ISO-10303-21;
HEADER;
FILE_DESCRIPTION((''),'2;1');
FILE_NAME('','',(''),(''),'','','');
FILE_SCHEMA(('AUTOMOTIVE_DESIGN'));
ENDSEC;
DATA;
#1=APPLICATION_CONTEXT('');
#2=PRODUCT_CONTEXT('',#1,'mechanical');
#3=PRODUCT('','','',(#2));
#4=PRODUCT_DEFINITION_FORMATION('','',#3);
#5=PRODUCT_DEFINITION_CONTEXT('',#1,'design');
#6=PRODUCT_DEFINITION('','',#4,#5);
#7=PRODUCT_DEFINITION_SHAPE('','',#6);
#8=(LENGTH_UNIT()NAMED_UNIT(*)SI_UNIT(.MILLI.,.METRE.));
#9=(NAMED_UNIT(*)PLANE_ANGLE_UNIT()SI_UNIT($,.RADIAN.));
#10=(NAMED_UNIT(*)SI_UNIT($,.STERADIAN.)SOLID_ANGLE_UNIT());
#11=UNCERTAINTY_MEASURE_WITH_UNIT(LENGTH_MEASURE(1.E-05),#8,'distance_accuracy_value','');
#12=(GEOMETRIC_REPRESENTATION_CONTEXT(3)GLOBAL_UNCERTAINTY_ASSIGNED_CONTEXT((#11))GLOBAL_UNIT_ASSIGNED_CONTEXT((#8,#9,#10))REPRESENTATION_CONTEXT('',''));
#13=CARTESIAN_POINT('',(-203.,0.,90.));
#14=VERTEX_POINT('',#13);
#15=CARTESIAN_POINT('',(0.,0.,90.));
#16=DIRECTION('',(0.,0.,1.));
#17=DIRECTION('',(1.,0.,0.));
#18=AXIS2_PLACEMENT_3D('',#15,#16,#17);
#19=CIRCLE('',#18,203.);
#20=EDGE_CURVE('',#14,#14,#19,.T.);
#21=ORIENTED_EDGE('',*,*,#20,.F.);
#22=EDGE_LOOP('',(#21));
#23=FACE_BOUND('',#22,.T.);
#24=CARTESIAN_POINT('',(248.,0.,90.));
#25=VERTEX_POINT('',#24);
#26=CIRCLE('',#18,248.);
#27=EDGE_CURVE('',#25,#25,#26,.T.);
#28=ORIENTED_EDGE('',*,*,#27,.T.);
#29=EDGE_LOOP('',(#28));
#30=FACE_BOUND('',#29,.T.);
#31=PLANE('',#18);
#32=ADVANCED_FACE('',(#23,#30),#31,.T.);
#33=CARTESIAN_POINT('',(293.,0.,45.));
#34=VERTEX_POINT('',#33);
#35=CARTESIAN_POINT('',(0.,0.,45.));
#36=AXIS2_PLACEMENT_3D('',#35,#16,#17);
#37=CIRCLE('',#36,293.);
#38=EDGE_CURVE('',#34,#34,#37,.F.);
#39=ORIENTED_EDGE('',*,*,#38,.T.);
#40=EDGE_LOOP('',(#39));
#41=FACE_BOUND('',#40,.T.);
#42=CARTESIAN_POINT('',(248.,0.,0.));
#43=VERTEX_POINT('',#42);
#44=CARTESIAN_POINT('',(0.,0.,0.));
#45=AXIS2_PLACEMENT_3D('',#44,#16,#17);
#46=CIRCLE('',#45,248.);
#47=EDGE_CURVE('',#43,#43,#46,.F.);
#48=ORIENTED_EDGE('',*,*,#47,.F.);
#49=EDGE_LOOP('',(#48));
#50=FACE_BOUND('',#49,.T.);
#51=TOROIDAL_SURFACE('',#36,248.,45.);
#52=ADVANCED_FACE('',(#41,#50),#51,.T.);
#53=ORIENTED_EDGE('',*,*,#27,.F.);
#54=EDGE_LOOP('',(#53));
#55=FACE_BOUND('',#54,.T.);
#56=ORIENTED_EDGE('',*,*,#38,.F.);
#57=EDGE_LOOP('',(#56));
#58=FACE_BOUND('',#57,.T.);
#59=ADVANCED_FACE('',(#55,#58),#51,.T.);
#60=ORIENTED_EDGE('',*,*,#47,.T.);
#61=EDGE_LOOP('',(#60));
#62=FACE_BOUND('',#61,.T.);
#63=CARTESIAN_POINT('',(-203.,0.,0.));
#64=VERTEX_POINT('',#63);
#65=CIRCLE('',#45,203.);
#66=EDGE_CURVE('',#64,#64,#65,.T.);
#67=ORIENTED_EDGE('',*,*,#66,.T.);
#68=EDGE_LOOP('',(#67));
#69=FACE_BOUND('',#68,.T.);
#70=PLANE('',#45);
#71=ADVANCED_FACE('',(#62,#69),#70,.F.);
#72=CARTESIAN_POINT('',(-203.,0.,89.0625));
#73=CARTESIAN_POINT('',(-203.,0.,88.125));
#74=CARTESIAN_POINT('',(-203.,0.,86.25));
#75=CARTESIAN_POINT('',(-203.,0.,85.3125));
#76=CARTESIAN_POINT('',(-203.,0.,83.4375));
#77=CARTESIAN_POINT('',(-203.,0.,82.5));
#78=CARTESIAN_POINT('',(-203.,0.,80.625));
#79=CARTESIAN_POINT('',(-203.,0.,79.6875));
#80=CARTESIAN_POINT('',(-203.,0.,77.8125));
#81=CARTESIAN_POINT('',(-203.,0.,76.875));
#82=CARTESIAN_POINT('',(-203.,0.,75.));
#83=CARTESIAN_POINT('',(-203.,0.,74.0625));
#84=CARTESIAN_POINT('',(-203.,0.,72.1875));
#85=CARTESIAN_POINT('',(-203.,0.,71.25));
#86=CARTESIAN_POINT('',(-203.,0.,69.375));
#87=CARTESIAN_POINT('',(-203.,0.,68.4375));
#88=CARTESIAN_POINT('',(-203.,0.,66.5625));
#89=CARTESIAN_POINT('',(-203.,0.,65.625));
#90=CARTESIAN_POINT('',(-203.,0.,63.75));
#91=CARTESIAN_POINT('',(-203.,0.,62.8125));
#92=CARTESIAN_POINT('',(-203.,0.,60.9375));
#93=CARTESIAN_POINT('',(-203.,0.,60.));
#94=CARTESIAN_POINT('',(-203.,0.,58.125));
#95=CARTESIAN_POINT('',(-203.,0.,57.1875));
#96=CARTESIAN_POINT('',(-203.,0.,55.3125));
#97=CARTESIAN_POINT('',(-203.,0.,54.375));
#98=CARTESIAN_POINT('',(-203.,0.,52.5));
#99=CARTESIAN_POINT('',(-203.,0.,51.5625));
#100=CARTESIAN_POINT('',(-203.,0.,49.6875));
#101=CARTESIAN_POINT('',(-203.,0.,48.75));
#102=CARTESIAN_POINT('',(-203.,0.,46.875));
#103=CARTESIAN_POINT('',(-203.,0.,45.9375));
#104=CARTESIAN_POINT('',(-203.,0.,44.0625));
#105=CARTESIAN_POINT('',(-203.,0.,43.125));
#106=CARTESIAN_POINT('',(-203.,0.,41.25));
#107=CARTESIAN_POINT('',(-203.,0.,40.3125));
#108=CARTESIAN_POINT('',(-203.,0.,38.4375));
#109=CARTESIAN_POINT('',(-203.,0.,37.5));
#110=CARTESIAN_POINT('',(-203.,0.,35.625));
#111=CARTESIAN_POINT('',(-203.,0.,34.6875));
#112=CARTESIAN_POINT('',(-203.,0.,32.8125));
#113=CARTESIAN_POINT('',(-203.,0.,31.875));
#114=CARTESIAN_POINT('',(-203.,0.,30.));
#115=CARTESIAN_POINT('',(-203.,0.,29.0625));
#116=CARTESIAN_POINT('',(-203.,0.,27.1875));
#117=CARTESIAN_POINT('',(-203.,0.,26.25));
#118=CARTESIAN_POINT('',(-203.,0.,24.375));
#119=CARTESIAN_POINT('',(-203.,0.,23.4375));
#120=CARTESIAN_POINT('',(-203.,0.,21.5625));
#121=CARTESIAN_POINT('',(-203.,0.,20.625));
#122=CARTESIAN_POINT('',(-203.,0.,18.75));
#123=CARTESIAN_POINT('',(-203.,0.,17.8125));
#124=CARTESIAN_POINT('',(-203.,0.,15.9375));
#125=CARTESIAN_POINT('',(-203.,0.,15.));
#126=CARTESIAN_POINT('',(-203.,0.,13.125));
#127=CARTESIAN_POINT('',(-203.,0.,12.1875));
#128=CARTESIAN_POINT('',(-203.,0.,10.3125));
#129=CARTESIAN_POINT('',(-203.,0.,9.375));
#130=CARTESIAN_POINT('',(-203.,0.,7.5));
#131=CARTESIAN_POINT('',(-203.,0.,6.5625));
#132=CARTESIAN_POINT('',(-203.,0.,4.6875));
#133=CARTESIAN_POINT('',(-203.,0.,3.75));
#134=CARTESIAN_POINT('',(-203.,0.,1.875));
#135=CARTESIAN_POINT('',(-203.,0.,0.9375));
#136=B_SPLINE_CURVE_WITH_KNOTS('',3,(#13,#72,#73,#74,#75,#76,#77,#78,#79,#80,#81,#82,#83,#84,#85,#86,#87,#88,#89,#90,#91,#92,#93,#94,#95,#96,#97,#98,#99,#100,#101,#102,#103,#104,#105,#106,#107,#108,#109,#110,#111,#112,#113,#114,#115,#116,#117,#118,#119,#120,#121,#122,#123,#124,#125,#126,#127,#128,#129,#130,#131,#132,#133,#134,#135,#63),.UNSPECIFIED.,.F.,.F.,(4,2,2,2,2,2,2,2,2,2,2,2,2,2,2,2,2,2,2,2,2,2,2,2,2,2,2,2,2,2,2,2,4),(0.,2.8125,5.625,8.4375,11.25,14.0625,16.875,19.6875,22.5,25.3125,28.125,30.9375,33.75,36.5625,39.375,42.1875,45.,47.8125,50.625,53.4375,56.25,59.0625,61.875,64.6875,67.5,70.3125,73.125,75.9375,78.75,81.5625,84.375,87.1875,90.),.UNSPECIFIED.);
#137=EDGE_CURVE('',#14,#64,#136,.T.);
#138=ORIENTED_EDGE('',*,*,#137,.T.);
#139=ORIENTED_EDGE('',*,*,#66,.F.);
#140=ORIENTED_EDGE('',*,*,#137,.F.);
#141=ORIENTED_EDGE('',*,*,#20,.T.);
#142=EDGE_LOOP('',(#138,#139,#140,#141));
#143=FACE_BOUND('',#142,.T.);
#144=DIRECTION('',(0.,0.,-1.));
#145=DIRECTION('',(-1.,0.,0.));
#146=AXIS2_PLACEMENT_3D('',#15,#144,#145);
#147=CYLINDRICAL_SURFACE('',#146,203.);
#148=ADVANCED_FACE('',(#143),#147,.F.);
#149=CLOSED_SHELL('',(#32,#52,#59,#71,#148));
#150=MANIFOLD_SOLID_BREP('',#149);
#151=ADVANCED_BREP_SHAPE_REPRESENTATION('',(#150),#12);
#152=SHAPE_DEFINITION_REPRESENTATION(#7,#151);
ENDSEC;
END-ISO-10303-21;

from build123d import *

# Parameters (mm, degrees)
SZKIC1_R                    = 293
SZKIC1_R_2                  = 203
DODANIE_WYCI_GNI_CIE1_DEPTH = 90
ZAOKR_GLENIE1_R             = 45


with BuildPart() as part:
    # Szkic1 → Dodanie-wyciągnięcie1 (new body)
    with BuildSketch(Plane.XY):
        with Locations(Location((0, 0, 0), (0, 0, 180))):
            Circle(SZKIC1_R)
        with Locations(Location((0, 0, 0), (0, 0, 180))):
            Circle(SZKIC1_R_2, mode=Mode.SUBTRACT)
    extrude(amount=DODANIE_WYCI_GNI_CIE1_DEPTH)

    # Zaokrąglenie1
    zaokr_glenie1_edges = [part.edges().sort_by_distance(p)[0] for p in [
        (293, 0, 0),
        (293, 0, 90),
    ]]
    fillet(zaokr_glenie1_edges, radius=ZAOKR_GLENIE1_R - 0.0001)  # a hair under: the kernel refuses the full size


solid = part.part
